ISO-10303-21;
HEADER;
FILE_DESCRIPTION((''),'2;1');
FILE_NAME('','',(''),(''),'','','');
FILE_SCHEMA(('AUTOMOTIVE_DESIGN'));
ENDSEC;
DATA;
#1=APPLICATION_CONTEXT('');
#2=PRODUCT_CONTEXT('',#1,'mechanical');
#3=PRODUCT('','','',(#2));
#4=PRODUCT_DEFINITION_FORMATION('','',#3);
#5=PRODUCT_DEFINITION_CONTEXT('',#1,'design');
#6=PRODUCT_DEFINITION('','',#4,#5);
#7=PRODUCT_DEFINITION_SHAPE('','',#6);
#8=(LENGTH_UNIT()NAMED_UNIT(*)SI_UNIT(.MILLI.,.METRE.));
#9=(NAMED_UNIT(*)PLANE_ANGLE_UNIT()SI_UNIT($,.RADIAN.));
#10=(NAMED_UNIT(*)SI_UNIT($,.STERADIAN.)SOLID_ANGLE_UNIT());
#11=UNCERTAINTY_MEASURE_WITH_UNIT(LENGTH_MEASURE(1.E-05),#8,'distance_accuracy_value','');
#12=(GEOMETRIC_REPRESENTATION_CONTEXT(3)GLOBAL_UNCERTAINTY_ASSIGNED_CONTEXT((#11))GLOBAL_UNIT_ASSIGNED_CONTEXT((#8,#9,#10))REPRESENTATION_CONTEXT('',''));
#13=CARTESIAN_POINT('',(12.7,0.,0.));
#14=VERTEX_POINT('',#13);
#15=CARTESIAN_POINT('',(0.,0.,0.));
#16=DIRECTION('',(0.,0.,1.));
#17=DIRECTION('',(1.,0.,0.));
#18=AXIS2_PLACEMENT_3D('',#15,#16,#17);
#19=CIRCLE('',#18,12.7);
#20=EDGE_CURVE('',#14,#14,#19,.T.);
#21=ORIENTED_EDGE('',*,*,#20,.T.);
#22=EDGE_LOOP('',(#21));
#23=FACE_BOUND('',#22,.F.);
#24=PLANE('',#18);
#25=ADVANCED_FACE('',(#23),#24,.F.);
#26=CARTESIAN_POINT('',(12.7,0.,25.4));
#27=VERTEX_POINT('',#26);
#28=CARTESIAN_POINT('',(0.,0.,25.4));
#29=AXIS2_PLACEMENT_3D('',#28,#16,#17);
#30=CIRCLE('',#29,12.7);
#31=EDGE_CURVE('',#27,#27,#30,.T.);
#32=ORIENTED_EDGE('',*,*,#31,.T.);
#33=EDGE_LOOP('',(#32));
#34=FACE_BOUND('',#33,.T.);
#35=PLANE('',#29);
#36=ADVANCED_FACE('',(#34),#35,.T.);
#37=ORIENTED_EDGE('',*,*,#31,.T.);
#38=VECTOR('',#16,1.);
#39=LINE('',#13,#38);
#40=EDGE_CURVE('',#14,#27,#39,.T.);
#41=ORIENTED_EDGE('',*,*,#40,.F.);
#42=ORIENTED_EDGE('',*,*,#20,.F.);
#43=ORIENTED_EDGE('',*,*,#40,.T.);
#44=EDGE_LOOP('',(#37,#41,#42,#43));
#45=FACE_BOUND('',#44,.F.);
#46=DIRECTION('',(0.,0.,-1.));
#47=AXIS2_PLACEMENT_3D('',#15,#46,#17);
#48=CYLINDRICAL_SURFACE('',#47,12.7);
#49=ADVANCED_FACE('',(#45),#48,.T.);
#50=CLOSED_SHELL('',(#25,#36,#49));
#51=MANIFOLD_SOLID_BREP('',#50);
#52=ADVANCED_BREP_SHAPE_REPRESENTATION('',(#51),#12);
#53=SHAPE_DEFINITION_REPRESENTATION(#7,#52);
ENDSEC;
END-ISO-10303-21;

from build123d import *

# Parameters (mm, degrees)
F0_R     = 12.7
F0_R_2   = 9.525
F2_DEPTH = 25.4


# Not quite as in the source:
# - a variable given as a bare number and used for a length is read in inches; the dataset says mm whatever the document's units were


with BuildPart() as f2:
    # F0 (on Top) → F2 (new body)
    with BuildSketch(Plane.XY):
        Circle(F0_R)
        Circle(F0_R_2, mode=Mode.SUBTRACT)
        Circle(F0_R_2)
    extrude(amount=F2_DEPTH)


solid = f2.part
